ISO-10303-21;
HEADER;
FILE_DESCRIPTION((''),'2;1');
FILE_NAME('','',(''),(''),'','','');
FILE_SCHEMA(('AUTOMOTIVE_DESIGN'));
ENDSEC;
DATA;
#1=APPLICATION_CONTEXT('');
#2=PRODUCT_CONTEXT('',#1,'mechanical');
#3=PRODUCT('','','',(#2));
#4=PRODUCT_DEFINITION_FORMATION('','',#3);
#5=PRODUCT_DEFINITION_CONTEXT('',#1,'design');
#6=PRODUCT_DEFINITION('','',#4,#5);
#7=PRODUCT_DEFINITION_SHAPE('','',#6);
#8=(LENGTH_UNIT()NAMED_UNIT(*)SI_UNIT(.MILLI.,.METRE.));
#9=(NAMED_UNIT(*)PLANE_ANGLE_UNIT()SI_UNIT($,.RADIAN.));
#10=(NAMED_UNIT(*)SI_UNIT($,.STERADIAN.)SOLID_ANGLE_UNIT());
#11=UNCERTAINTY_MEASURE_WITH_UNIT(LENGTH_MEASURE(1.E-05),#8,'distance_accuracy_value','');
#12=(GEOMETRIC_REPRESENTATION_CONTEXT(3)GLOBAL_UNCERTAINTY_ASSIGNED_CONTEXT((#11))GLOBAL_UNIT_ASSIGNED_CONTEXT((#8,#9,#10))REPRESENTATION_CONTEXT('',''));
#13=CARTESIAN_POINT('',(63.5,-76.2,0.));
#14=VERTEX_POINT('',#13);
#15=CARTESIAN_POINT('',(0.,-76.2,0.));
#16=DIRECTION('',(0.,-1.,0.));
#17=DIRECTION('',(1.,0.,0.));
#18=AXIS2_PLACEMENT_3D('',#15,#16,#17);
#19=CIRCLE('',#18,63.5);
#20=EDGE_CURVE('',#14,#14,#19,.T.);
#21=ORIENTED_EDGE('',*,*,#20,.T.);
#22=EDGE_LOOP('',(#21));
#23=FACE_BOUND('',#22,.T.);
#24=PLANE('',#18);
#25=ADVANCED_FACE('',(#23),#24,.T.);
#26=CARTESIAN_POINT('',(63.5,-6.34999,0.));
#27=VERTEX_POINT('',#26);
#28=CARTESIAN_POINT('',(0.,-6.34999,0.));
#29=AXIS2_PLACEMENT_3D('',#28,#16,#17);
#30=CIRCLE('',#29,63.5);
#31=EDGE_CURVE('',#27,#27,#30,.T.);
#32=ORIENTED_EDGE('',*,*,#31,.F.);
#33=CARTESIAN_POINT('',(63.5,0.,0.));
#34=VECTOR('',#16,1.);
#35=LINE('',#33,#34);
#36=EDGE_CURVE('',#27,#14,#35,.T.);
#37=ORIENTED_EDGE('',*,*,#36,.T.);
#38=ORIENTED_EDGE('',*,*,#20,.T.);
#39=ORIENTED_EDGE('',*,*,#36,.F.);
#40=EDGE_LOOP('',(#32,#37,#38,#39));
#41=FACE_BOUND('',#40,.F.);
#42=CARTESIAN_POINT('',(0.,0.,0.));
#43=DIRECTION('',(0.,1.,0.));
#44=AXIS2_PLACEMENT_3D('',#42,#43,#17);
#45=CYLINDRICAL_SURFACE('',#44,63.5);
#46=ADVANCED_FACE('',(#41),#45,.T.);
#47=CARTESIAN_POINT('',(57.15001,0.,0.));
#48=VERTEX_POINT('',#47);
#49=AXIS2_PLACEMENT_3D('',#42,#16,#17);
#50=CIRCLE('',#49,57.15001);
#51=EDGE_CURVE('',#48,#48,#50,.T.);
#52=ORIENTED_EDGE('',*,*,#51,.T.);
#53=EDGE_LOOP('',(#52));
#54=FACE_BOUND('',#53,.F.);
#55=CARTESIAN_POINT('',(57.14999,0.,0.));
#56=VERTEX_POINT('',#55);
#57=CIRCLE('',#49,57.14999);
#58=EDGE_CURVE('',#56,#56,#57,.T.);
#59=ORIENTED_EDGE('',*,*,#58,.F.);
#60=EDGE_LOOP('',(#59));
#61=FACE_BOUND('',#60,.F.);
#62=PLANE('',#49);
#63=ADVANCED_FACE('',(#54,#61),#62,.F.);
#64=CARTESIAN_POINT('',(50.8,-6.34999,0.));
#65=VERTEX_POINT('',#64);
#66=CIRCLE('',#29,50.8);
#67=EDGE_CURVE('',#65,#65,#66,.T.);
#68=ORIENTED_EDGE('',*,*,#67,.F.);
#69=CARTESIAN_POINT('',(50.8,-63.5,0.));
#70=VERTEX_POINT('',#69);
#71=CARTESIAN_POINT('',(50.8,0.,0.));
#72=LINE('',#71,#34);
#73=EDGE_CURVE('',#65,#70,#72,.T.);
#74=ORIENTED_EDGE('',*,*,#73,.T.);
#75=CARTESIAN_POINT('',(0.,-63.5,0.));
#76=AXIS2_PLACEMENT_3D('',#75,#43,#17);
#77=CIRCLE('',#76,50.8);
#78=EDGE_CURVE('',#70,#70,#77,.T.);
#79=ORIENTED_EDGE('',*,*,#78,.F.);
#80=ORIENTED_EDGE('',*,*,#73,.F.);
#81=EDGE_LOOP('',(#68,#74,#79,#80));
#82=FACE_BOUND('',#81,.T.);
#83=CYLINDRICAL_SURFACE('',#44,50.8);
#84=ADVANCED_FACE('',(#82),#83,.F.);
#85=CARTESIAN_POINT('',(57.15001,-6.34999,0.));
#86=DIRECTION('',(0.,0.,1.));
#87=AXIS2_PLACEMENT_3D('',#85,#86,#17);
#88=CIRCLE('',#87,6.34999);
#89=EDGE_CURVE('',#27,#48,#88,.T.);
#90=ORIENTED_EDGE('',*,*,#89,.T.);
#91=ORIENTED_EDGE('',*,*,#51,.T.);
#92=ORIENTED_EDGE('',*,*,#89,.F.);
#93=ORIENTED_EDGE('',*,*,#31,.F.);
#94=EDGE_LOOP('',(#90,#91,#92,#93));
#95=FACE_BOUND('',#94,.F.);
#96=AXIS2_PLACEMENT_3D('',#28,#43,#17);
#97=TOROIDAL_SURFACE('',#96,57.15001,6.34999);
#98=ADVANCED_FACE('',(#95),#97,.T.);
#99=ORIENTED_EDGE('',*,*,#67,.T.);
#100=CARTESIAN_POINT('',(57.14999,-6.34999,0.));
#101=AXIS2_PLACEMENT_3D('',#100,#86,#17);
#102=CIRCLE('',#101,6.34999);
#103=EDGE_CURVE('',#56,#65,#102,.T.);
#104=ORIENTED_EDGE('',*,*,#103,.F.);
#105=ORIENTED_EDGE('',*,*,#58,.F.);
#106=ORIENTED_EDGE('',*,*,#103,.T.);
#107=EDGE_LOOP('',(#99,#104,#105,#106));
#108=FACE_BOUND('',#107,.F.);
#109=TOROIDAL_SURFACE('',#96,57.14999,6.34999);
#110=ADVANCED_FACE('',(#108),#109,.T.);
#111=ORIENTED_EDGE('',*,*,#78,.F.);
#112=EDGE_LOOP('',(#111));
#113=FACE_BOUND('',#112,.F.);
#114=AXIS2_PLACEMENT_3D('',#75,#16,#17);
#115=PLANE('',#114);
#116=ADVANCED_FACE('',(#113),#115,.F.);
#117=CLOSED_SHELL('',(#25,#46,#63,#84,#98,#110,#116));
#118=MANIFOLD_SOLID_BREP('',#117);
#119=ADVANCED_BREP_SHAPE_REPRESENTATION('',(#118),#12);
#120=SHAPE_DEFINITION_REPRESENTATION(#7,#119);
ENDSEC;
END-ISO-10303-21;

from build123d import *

# Parameters (mm, degrees)
F0_R     = 63.5
F1_DEPTH = 76.2
F2_T     = -12.7
F3_R     = 6.34999


# Not quite as in the source:
# - a fillet or chamfer is up to 0.001 mm smaller than in the source, because OpenCascade refuses the exact size


with BuildPart() as f1:
    # F0 (on Front) → F1 (new body)
    with BuildSketch(Plane.XZ):
        Circle(F0_R)
    extrude(amount=F1_DEPTH)

    # F2
    f2_openings = [f1.faces().sort_by_distance(p)[0] for p in [
        (0, 0, 0),
    ]]
    offset(amount=F2_T, openings=f2_openings)

    # F3 (radius 6.35 in the source; OpenCascade refuses exactly that, so slightly less here)
    f3_edges = [f1.edges().sort_by_distance(p)[0] for p in [
        (-63.5, 0, 0),
        (-50.8, 0, 0),
    ]]
    fillet(f3_edges, radius=F3_R)


solid = f1.part
